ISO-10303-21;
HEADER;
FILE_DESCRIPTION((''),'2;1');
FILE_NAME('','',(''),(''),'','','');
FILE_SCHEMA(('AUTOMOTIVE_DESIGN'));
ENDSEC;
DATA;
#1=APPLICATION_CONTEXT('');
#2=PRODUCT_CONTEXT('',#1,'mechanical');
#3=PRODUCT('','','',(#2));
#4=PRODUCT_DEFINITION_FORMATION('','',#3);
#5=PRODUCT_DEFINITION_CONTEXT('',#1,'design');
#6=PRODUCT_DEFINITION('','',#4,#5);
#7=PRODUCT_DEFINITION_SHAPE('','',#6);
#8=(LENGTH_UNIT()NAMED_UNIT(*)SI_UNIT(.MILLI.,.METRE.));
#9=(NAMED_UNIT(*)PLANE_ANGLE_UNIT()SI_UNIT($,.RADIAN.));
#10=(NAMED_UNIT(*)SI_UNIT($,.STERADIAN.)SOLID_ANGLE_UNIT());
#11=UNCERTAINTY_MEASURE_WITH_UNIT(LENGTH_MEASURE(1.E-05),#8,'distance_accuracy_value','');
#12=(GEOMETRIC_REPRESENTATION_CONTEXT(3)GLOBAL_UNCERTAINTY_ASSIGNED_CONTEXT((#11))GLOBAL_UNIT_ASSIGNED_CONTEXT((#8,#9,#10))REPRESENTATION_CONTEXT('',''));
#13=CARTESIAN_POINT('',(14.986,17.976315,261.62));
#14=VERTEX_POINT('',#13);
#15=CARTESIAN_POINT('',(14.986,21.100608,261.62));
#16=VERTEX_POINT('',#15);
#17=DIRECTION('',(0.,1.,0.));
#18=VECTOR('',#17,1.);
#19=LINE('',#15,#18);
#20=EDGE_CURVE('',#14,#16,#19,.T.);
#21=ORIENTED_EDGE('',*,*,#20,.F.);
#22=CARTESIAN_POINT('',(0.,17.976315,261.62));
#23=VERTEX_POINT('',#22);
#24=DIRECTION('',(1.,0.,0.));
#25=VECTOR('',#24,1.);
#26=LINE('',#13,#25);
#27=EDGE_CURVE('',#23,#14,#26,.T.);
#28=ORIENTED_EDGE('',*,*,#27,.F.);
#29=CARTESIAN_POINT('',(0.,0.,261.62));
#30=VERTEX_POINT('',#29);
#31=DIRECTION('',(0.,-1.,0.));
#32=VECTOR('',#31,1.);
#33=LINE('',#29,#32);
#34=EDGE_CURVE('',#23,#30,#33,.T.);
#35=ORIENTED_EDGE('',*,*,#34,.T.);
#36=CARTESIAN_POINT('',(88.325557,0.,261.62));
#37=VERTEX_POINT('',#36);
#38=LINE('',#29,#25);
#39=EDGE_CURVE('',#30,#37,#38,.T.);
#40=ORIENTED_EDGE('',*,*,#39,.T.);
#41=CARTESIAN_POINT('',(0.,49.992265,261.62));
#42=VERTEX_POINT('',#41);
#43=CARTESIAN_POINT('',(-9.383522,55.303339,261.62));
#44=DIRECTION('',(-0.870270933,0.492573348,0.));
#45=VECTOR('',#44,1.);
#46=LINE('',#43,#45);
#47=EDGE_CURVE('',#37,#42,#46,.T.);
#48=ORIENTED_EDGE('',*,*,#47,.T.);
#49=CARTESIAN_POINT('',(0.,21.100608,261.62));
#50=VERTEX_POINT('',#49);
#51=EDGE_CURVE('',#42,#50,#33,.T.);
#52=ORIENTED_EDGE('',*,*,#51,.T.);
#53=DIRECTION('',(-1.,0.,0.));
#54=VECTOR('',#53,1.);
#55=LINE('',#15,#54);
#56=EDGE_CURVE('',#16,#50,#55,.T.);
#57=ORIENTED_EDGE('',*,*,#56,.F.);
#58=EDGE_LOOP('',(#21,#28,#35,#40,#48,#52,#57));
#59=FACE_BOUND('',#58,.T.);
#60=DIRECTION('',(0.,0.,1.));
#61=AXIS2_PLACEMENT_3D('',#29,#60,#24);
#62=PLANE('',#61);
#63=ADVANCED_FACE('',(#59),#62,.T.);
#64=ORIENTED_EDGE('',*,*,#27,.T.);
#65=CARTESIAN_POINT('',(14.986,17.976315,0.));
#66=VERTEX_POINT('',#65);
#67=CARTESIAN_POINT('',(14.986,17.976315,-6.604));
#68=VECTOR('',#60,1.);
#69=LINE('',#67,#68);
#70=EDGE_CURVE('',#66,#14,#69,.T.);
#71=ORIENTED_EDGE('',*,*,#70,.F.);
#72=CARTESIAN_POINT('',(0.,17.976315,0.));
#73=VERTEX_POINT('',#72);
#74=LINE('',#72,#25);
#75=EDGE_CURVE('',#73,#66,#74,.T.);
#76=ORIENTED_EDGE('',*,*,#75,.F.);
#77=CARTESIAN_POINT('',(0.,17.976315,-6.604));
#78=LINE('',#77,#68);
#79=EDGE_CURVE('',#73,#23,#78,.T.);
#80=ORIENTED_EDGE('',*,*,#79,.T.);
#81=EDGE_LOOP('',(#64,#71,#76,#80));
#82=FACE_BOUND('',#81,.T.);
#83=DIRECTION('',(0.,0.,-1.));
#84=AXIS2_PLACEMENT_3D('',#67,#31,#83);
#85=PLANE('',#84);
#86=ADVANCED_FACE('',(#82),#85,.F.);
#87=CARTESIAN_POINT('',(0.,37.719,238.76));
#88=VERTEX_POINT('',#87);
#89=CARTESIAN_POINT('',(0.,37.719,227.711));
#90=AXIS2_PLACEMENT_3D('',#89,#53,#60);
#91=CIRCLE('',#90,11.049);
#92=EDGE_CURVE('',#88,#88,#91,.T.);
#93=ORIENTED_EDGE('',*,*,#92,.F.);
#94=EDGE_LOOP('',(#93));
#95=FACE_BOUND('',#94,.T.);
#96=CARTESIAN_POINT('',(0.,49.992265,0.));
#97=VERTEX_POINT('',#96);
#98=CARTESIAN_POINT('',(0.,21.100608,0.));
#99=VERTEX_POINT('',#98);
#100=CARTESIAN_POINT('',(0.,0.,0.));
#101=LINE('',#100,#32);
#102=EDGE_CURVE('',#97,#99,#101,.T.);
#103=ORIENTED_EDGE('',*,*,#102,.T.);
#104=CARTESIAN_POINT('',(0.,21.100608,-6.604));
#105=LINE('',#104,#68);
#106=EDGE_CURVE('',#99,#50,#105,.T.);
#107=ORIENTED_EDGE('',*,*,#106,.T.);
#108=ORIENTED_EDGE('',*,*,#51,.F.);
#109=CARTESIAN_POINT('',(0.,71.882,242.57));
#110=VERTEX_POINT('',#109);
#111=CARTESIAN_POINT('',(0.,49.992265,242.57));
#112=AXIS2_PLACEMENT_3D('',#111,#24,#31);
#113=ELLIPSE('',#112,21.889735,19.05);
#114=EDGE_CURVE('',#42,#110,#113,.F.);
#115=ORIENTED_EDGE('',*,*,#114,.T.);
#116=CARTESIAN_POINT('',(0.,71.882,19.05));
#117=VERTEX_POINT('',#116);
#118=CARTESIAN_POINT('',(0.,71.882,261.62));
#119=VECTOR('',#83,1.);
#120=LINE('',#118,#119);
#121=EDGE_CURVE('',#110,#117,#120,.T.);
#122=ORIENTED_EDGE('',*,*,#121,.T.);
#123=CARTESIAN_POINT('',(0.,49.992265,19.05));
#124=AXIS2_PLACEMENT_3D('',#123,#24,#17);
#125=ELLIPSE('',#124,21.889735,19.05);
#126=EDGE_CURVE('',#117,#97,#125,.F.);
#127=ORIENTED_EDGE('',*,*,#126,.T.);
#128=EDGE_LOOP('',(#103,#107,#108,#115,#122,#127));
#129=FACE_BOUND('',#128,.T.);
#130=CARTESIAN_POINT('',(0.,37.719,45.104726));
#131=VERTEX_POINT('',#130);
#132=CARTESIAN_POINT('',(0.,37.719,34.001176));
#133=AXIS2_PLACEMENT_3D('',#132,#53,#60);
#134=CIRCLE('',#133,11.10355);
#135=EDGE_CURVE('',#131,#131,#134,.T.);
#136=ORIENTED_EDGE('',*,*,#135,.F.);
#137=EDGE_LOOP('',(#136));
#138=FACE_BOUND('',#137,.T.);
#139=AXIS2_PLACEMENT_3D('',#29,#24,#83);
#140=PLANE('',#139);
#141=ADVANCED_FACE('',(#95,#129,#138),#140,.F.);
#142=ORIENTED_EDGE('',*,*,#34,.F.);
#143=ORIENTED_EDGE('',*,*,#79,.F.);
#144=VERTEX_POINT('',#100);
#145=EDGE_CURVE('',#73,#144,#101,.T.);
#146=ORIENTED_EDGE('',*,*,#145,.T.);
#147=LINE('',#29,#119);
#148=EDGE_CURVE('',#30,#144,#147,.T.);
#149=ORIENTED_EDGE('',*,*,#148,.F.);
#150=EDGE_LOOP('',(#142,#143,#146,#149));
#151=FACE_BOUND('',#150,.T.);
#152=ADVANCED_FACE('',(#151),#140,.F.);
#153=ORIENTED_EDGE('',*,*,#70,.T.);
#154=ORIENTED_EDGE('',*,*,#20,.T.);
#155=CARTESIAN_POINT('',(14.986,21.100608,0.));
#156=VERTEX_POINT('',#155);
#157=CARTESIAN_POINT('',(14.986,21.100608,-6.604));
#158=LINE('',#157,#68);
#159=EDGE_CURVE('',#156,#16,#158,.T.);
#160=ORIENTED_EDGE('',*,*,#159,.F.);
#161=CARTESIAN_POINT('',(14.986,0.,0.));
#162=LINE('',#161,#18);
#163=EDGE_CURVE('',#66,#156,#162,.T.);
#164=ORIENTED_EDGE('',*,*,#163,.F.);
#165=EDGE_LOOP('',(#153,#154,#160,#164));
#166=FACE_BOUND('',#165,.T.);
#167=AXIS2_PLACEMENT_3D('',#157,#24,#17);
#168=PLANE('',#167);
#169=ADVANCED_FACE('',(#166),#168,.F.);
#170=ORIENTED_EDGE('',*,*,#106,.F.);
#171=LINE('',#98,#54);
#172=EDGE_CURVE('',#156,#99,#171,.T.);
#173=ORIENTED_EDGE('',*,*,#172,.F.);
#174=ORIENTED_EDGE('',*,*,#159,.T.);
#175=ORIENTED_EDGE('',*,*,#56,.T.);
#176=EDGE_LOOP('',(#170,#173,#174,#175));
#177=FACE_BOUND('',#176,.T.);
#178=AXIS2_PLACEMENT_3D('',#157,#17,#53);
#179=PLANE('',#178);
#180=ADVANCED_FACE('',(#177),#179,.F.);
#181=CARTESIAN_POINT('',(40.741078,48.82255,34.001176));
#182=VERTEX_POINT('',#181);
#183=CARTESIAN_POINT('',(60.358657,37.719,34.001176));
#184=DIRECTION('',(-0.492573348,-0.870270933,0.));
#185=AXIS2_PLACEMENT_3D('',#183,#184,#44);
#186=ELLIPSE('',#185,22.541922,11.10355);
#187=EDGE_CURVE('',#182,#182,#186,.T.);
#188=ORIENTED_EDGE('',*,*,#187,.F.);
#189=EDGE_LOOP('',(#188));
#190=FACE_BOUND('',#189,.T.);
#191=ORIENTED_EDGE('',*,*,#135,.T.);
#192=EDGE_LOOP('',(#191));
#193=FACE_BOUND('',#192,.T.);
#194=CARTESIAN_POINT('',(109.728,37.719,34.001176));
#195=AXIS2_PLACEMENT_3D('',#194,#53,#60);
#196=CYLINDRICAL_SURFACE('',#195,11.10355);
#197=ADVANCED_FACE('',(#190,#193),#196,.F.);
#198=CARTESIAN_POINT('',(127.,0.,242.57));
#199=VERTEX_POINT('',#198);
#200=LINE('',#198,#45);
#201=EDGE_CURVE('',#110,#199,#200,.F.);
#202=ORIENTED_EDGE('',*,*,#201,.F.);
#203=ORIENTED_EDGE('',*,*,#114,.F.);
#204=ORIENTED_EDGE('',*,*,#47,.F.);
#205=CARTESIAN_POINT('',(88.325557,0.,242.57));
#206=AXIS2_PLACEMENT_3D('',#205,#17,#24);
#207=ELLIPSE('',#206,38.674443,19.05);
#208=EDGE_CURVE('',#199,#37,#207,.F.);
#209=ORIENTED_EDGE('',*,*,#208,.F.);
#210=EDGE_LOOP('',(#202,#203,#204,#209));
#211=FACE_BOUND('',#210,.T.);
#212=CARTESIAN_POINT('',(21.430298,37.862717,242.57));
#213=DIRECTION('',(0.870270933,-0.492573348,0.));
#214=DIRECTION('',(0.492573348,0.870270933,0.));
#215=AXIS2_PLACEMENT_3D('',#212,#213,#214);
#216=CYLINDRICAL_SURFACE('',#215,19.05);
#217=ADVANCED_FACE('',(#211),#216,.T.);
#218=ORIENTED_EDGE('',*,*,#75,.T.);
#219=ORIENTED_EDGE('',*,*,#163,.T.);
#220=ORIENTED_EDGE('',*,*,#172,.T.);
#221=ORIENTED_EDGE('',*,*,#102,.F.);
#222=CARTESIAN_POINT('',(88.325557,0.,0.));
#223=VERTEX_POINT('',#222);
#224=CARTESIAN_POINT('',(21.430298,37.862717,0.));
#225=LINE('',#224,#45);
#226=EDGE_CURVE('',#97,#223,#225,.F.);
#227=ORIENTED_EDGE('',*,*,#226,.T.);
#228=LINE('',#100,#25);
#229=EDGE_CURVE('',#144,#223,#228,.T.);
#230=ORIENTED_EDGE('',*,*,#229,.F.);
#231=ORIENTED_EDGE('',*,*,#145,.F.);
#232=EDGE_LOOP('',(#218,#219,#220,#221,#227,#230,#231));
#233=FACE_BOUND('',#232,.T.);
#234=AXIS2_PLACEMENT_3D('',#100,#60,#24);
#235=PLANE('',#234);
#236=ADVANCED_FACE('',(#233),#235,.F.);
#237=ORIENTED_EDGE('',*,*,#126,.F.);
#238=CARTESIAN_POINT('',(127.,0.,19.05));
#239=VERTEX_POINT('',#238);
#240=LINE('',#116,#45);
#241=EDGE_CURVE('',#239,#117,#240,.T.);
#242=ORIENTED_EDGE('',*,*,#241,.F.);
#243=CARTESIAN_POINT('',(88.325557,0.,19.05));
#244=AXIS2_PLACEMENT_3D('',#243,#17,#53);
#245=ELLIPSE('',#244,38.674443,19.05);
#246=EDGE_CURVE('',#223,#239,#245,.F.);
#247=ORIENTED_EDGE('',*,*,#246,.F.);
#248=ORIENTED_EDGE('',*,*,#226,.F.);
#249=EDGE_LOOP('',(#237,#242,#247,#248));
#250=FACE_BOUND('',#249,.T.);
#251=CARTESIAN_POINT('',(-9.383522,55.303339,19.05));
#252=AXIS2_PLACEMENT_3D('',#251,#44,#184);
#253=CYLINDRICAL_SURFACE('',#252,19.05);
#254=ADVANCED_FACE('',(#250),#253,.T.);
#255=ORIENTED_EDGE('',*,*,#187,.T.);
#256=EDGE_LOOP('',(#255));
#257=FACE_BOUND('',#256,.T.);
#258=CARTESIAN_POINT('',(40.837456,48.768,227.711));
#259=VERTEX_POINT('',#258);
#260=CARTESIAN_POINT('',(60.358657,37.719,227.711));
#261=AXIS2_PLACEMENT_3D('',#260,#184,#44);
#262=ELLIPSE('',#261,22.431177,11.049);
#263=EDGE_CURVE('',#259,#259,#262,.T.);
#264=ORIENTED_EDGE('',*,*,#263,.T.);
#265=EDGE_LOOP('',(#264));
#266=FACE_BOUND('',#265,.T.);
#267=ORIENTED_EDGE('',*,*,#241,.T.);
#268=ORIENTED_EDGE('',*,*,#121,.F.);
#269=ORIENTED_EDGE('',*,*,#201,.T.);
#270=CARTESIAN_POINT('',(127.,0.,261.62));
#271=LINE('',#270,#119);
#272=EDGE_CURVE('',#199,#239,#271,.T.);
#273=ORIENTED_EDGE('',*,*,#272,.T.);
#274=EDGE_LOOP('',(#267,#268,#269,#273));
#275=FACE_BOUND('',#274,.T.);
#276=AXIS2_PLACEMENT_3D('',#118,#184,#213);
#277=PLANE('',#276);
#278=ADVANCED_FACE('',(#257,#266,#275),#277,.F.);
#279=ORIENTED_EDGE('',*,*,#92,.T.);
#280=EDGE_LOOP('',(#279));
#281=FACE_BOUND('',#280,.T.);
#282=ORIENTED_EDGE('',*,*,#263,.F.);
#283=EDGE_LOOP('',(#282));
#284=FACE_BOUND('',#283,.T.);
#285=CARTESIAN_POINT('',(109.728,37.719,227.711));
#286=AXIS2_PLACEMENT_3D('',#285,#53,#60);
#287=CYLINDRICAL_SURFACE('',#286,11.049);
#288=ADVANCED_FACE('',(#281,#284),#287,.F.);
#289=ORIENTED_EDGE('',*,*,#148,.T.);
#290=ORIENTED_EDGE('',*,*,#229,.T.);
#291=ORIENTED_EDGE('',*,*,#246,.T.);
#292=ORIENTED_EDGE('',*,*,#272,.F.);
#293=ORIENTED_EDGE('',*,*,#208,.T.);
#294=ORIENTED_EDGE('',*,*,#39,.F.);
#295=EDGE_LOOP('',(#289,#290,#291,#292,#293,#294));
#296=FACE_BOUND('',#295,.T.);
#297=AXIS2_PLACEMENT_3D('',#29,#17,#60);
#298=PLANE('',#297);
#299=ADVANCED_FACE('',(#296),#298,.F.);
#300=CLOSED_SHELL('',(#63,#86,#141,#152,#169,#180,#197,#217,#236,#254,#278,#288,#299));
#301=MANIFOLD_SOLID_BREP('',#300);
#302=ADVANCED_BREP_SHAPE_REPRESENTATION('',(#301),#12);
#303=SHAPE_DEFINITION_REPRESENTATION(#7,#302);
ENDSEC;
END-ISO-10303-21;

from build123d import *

# Parameters (mm, degrees)
BOSS_EXTRUDE1_DEPTH = 261.62
SKETCH3_R           = 11.049
SKETCH3_R_2         = 11.103550021
CUT_EXTRUDE2_DEPTH  = 109.728
SKETCH2_W           = 14.986
SKETCH2_H           = 3.124293054
CUT_EXTRUDE3_DEPTH  = 268.224
VARFILLET1_START    = -36
VARFILLET1_DEPTH    = 148


with BuildPart() as part:
    # Sketch1 → Boss-Extrude1 (new body)
    with BuildSketch(Plane.XY):
        Polygon((0, 0), (0, 71.882), (127, 0), align=None)
    extrude(amount=BOSS_EXTRUDE1_DEPTH)

    # Sketch3 → Cut-Extrude2 (cut)
    with BuildSketch(Plane.ZY):
        with Locations((227.711, 37.719)):
            Circle(SKETCH3_R)
        with Locations((34.001176145, 37.719)):
            Circle(SKETCH3_R_2)
    extrude(amount=-CUT_EXTRUDE2_DEPTH, mode=Mode.SUBTRACT)

    # Sketch2 → Cut-Extrude3 (cut)
    with BuildSketch(Plane.XY.offset(261.62)):
        with Locations((7.493, 19.538461467)):
            Rectangle(SKETCH2_W, SKETCH2_H)
    extrude(amount=-CUT_EXTRUDE3_DEPTH, mode=Mode.SUBTRACT)

    # VarFillet1: read off the stored shape, not the designer's step
    # VarFillet1 outline → VarFillet1 (cut)
    with BuildSketch(Plane(origin=(0, 0, 0), x_dir=(0.4925733480628631, 0.8702709329732561, 0), z_dir=(0.8702709329732561, -0.49257334806286307, 0)).offset(VARFILLET1_START)):
        with BuildLine():
            Line((62.556815204, 0), (62.556815204, 19.05))
            ThreePointArc((62.556815204, 19.05), (56.977199386, 5.579615818), (43.506815204, 0))
            Line((43.506815204, 0), (62.556815204, 0))
        make_face()
        with BuildLine():
            ThreePointArc((43.506815204, 261.62), (56.977199386, 256.040384182), (62.556815204, 242.57))
            Line((62.556815204, 242.57), (62.556815204, 261.62))
            Line((62.556815204, 261.62), (43.506815204, 261.62))
        make_face()
    extrude(amount=VARFILLET1_DEPTH, mode=Mode.SUBTRACT)


solid = part.part
